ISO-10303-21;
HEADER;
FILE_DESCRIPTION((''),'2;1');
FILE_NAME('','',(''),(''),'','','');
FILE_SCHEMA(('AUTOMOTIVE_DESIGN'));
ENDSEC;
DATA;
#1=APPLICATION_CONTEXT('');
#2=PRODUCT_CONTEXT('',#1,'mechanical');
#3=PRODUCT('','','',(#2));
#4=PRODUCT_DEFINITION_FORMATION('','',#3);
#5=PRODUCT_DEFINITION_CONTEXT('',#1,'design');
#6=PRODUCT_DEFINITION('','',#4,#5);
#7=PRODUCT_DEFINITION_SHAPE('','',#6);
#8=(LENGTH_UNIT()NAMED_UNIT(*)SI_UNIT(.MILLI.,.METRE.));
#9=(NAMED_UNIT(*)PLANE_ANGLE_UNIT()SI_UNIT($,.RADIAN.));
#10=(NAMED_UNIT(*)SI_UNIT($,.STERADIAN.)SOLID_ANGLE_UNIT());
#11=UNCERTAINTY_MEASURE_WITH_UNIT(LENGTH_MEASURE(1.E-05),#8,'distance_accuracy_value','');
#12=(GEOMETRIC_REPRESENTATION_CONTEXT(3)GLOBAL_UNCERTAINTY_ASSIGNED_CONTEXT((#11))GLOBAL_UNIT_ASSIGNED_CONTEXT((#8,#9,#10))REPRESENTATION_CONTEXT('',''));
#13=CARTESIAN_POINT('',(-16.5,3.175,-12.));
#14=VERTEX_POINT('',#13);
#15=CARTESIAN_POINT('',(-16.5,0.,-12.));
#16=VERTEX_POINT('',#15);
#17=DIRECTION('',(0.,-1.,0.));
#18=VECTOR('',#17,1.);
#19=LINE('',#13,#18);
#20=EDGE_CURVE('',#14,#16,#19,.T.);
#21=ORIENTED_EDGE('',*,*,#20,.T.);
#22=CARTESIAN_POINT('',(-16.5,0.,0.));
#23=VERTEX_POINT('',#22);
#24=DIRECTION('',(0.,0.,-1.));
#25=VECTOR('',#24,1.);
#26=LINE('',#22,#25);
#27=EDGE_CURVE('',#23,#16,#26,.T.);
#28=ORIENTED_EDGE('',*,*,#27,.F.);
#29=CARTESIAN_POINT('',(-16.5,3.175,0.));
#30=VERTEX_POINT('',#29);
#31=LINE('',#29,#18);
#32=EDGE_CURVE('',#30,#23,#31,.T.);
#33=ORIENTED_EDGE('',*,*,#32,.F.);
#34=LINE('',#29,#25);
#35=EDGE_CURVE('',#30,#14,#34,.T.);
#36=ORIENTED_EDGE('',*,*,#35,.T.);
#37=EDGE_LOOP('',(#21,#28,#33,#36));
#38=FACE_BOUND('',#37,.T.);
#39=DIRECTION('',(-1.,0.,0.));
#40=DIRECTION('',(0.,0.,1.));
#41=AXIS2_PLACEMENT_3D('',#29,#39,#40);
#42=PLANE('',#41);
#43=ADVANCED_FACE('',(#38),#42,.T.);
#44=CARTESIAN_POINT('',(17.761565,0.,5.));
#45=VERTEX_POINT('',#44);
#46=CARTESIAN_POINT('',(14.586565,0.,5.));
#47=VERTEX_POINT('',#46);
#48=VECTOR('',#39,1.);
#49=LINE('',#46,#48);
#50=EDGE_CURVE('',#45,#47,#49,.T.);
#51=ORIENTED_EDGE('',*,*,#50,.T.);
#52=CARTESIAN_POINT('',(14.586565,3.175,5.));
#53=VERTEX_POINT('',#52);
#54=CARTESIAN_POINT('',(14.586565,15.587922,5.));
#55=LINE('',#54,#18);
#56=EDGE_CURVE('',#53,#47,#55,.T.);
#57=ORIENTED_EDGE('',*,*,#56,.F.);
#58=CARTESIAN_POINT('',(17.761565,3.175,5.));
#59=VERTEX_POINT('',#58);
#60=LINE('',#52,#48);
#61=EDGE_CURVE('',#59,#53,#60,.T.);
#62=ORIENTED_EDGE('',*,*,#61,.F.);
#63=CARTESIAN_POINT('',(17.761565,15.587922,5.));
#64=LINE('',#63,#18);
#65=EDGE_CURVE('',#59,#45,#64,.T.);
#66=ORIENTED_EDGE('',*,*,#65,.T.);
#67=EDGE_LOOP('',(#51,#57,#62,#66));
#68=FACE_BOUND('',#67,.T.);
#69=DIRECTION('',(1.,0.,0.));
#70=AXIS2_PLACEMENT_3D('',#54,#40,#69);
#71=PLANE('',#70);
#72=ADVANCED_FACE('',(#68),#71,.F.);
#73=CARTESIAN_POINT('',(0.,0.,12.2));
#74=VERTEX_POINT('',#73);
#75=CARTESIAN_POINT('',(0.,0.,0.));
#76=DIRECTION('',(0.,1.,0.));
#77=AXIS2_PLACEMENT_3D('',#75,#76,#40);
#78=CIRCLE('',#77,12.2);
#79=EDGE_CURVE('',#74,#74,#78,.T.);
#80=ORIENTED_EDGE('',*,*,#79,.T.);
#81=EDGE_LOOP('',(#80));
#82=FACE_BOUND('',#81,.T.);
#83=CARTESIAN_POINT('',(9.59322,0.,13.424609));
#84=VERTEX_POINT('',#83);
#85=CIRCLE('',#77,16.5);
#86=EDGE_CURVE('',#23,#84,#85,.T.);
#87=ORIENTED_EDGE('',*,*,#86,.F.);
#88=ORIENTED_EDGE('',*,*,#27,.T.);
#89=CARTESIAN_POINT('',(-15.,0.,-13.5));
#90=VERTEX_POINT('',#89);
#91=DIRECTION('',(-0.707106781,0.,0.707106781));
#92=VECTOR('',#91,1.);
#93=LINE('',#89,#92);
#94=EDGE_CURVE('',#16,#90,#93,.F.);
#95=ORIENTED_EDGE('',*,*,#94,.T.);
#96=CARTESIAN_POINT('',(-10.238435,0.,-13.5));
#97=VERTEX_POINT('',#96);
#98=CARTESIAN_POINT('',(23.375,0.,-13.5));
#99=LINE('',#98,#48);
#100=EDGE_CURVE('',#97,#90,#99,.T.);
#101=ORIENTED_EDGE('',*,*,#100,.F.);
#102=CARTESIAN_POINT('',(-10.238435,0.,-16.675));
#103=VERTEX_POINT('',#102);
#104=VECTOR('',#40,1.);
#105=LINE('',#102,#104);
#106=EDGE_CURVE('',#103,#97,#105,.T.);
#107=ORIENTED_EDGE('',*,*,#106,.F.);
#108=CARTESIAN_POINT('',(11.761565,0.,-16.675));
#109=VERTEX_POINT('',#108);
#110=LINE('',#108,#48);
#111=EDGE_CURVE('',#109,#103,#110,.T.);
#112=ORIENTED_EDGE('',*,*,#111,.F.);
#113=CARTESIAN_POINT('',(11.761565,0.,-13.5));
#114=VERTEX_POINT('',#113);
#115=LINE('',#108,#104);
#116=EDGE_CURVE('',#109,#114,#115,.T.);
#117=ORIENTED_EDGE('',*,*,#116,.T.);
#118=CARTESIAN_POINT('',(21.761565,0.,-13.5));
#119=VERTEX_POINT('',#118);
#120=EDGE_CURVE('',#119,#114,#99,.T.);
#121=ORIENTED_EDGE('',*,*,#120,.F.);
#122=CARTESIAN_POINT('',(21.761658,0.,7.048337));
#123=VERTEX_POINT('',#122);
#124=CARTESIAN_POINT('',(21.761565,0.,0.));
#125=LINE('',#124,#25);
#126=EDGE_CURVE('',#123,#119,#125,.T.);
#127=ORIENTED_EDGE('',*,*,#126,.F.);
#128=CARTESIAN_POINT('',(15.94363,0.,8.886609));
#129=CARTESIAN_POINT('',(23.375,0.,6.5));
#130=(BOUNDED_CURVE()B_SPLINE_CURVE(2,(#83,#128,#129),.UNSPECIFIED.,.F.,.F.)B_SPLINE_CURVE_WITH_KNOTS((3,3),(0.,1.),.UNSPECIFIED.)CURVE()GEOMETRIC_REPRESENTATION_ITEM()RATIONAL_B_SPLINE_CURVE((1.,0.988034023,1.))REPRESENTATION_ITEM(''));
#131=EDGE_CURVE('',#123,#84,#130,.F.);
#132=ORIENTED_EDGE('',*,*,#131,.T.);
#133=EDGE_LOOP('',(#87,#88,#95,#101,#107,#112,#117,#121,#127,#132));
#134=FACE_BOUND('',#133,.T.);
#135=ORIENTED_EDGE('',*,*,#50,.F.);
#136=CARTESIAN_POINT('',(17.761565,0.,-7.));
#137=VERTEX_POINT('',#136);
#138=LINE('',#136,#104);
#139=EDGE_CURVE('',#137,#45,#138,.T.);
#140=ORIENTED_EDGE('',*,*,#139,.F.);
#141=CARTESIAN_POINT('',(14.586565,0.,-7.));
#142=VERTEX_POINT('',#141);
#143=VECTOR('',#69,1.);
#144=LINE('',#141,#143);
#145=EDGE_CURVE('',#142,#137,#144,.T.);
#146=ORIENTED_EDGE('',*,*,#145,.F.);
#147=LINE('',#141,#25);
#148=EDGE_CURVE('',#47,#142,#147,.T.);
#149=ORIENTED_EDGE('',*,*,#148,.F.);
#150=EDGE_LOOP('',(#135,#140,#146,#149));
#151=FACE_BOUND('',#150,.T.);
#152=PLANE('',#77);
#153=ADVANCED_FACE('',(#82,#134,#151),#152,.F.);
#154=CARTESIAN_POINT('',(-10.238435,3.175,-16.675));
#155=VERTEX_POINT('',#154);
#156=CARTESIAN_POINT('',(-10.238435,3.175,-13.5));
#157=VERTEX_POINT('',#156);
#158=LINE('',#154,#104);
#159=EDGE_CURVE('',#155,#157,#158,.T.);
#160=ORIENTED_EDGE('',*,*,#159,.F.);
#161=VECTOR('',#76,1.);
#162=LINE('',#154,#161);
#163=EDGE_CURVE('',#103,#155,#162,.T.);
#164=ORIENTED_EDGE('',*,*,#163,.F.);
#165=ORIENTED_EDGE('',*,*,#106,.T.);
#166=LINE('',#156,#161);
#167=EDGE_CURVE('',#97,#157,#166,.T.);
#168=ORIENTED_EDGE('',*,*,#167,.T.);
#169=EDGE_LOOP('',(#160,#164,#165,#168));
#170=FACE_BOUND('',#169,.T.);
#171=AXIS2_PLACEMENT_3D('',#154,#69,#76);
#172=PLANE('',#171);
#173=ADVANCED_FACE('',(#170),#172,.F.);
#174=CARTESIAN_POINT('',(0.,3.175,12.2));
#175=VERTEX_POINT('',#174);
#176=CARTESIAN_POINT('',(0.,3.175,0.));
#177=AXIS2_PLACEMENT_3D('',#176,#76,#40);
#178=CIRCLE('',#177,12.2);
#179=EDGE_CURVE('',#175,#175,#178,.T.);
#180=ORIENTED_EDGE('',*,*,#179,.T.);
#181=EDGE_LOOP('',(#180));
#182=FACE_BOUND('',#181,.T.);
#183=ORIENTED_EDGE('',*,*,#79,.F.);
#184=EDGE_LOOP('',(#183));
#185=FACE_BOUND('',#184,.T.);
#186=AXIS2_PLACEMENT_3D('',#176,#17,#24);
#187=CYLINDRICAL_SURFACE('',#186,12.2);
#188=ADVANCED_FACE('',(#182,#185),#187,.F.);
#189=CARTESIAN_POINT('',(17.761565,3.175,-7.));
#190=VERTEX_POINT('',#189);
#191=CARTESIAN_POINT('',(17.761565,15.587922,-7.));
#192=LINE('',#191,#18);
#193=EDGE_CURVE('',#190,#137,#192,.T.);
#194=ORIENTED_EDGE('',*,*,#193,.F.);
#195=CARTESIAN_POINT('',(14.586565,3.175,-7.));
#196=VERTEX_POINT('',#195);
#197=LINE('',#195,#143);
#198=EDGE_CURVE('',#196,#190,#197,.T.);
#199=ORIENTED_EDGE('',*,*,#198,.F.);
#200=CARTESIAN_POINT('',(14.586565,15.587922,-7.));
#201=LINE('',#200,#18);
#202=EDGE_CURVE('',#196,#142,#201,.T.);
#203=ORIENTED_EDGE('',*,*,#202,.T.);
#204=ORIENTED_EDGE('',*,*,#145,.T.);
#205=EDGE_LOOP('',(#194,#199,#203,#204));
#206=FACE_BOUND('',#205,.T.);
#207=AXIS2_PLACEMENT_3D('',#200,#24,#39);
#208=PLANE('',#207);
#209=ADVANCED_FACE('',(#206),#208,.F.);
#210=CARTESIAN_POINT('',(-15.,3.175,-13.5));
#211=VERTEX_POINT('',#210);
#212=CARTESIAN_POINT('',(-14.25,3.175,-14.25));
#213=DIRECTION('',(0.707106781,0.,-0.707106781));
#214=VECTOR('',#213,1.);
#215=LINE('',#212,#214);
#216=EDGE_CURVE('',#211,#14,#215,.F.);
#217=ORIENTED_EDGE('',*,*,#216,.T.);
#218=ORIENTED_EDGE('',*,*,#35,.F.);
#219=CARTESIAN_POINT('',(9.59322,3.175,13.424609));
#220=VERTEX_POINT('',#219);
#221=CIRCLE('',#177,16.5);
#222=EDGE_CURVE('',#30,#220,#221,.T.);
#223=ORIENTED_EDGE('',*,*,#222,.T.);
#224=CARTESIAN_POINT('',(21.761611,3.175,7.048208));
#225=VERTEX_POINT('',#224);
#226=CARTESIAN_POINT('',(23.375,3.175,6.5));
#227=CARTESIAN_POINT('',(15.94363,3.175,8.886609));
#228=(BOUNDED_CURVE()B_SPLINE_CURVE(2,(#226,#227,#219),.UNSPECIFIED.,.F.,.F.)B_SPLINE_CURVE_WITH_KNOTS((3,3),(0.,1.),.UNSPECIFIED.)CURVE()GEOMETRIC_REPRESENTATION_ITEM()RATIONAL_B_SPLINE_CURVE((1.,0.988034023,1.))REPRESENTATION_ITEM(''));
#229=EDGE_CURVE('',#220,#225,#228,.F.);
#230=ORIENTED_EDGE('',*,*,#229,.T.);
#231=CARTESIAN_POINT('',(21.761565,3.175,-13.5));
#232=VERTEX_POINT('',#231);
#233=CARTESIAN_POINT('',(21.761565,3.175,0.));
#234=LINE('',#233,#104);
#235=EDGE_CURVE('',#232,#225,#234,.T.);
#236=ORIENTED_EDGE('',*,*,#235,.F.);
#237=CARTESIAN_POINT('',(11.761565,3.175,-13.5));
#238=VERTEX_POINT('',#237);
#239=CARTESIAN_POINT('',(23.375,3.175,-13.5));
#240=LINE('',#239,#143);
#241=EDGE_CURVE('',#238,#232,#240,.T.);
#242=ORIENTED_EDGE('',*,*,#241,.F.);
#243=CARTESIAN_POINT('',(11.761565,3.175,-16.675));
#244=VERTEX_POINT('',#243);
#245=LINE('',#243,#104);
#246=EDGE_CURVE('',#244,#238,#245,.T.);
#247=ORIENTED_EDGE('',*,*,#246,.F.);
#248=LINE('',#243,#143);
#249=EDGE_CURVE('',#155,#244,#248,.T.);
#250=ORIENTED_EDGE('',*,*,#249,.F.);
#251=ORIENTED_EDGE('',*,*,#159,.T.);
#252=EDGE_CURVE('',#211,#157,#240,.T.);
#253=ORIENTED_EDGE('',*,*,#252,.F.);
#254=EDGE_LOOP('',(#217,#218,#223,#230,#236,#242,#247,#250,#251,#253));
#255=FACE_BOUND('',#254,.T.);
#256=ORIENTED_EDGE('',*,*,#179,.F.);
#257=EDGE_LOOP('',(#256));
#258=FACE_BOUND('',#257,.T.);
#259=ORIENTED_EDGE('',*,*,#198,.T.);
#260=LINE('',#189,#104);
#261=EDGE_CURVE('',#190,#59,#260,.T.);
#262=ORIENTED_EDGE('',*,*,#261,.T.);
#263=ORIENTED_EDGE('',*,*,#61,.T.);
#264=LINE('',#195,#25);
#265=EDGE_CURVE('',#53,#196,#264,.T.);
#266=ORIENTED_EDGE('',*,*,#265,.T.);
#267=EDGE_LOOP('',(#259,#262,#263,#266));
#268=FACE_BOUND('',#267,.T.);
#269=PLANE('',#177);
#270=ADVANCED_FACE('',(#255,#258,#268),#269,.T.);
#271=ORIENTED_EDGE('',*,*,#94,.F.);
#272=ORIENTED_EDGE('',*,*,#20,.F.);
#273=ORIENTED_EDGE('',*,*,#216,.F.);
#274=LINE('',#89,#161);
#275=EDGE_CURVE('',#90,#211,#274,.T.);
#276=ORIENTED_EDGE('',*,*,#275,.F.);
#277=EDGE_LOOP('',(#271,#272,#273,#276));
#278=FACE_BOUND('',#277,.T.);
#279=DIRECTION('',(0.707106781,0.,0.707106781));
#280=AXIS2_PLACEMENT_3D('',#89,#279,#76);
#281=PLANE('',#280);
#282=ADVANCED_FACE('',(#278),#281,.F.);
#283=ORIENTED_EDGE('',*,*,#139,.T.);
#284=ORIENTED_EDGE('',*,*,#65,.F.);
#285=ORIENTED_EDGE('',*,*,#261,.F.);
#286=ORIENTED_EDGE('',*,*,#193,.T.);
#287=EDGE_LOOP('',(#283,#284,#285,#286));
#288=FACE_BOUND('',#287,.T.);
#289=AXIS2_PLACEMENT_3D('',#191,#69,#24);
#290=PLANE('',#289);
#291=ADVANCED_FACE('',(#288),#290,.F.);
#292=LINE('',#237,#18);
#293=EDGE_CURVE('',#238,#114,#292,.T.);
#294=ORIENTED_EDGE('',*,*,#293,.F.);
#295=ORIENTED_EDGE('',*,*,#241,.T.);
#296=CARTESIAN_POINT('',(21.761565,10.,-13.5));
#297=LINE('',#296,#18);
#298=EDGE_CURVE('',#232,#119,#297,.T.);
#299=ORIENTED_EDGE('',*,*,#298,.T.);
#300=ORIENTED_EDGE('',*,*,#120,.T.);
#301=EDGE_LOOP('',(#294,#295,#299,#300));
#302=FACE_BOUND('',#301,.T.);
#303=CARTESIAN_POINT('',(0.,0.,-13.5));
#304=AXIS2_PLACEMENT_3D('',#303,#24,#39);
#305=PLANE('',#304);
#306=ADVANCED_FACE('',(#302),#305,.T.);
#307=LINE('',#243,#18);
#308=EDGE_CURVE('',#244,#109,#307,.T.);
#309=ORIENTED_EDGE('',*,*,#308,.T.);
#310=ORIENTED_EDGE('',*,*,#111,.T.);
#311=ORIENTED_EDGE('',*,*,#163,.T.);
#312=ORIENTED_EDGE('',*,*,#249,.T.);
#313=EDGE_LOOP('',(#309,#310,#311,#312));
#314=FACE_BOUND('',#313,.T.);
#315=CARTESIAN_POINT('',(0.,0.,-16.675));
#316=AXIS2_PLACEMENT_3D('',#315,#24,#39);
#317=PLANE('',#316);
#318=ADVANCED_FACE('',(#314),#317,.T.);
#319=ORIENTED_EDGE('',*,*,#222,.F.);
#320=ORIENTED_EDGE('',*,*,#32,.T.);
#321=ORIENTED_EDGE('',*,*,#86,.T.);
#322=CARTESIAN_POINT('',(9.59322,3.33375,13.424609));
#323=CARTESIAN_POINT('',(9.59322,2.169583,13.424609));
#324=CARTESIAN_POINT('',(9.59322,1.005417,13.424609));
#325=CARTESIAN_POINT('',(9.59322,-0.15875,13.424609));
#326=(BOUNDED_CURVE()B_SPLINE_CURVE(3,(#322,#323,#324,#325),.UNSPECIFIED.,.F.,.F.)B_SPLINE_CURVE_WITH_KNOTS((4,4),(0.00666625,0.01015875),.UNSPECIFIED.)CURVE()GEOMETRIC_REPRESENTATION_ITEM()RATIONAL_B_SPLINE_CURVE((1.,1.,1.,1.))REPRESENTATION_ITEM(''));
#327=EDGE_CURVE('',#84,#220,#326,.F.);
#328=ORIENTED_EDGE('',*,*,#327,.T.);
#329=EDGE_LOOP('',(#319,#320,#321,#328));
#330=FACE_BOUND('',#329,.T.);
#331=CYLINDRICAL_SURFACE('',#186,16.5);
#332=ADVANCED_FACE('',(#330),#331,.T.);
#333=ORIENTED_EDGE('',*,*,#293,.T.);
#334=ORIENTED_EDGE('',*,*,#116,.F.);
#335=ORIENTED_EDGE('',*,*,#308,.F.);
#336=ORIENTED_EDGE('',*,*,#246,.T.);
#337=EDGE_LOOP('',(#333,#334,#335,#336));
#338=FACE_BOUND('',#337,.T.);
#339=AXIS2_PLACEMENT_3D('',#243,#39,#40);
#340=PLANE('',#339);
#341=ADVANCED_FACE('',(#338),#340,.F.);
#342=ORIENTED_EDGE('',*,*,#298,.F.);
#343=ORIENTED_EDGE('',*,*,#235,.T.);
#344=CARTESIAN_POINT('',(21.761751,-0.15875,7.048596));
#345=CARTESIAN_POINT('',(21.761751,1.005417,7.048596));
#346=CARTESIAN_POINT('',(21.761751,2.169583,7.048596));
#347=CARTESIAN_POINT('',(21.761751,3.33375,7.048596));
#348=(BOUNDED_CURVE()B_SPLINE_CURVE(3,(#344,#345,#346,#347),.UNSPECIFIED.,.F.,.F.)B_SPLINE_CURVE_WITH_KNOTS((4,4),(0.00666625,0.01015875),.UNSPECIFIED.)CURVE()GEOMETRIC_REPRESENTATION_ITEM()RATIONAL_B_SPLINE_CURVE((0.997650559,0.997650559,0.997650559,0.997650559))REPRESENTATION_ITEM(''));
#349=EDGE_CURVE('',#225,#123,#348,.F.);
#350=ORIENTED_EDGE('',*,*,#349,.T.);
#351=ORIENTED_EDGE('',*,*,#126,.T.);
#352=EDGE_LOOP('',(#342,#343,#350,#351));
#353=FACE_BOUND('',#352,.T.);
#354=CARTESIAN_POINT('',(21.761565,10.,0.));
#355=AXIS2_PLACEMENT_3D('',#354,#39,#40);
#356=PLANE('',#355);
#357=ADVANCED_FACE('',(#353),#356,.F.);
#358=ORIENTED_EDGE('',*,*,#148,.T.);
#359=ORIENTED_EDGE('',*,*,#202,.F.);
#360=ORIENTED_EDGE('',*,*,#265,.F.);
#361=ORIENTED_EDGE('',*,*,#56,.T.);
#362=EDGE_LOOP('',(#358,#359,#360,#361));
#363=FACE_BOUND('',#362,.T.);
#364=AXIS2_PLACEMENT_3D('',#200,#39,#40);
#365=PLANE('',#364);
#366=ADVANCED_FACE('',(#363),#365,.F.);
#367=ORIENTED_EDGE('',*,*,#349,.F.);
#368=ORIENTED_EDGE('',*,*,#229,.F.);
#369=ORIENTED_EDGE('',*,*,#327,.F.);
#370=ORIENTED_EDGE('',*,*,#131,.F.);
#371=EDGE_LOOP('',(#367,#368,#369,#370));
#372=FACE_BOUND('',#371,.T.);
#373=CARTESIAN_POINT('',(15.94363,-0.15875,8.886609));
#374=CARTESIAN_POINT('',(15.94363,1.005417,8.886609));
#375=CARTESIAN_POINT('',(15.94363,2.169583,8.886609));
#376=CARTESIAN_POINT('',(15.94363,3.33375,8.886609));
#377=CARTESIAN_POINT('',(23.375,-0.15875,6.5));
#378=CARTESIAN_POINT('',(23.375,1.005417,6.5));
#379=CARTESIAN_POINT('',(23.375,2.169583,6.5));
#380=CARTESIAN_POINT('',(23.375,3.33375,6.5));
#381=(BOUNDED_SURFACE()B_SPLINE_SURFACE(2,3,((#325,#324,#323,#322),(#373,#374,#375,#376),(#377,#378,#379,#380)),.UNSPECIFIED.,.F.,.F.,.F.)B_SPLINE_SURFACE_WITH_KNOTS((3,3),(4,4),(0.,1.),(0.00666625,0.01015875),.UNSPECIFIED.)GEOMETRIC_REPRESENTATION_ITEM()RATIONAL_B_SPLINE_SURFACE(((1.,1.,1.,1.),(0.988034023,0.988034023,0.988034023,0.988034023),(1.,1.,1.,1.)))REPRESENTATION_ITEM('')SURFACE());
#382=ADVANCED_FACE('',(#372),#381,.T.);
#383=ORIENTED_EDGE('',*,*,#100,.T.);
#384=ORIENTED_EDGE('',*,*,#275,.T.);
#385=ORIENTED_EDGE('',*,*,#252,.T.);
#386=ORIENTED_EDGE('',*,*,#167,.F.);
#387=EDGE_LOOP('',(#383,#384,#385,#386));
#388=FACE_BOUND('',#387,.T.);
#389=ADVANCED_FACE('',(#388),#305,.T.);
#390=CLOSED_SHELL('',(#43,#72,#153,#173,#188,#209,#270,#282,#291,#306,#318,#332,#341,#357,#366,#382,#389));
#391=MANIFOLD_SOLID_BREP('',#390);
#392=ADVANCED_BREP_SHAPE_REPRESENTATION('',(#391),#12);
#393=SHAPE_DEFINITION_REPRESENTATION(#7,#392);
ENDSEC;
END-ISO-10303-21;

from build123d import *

# Parameters (mm, degrees)
BOSS_EXTRUDE1_DEPTH = 3.175
SKETCH2_W           = 3.175
SKETCH2_H           = 14
BOSS_EXTRUDE2_DEPTH = 3.175
BOSS_EXTRUDE3_DEPTH = 3.175
CUT_EXTRUDE2_START  = -10
CUT_EXTRUDE2_DEPTH  = 10
FILLET1_R           = 50
SKETCH6_W           = 6.875
SKETCH6_H           = 3.175
BOSS_EXTRUDE5_DEPTH = 3.11351312
SKETCH7_W           = 11.175
SKETCH7_H           = 3.175
SKETCH7_W_2         = 4.3
CUT_EXTRUDE3_DEPTH  = 5.11351312
BOSS_EXTRUDE6_START = -3.175
BOSS_EXTRUDE6_DEPTH = 3.175
SKETCH9_W           = 3.175
SKETCH9_H           = 14
BOSS_EXTRUDE7_DEPTH = 3.175
SKETCH10_W          = 3.175
SKETCH10_H          = 12
CUT_EXTRUDE4_DEPTH  = 3.175
CUT_EXTRUDE5_DEPTH  = 10
SKETCH14_W          = 22
SKETCH14_H          = 3.175
BOSS_EXTRUDE8_DEPTH = 3.175
CHAMFER1_SIZE       = 1.5


with BuildPart() as part:
    # Sketch1 → Boss-Extrude1 (new body)
    with BuildSketch(Plane(origin=(0, 0, 0), x_dir=(1, 0, 0), z_dir=(0, 1, 0))):
        with BuildLine():
            ThreePointArc((-16.5, 0), (0, -16.5), (16.5, 0))
            Line((16.5, 0), (16.5, 18.61351312))
            Line((16.5, 18.61351312), (12.2, 18.61351312))
            Line((12.2, 18.61351312), (12.2, 0))
            ThreePointArc((12.2, 0), (0, -12.2), (-12.2, 0))
            Line((-12.2, 0), (-12.2, 18))
            Line((-12.2, 18), (-16.5, 18))
            Line((-16.5, 18), (-16.5, 0))
        make_face()
    extrude(amount=BOSS_EXTRUDE1_DEPTH)

    # Sketch2 → Boss-Extrude2 (add)
    with BuildSketch(Plane(origin=(0, 3.175, 0), x_dir=(1, 0, 0), z_dir=(0, 1, 0))):
        with BuildLine():
            Line((15.2, -3.034798181), (15.2, -4.5))
            Line((15.2, -4.5), (15.874507866, -4.5))
            Line((15.874507866, -4.5), (23.375, -4.5))
            Line((23.375, -4.5), (23.375, 15.5))
            Line((23.375, 15.5), (15.2, 15.5))
            Line((15.2, 15.5), (15.2, 3.034798181))
            ThreePointArc((15.2, 3.034798181), (15.424817665, 1.524795068), (15.5, 0))
            ThreePointArc((15.5, 0), (15.424817665, -1.524795068), (15.2, -3.034798181))
        make_face()
        with Locations((18.0875, 4.5)):
            Rectangle(SKETCH2_W, SKETCH2_H, mode=Mode.SUBTRACT)
    extrude(amount=-BOSS_EXTRUDE2_DEPTH)

    # Sketch3 → Boss-Extrude3 (add)
    with BuildSketch(Plane(origin=(0, 0, 0), x_dir=(-1, 0, 0), z_dir=(0, -1, 0))):
        with BuildLine():
            Line((-23.375, -16.5), (0, -16.5))
            ThreePointArc((0, -16.5), (-9.949874371, -13.162446581), (-15.874507866, -4.5))
            Line((-15.874507866, -4.5), (-23.375, -4.5))
            Line((-23.375, -4.5), (-23.375, -16.5))
        make_face()
    extrude(amount=-BOSS_EXTRUDE3_DEPTH)

    # Sketch5 → Cut-Extrude2 (cut)
    with BuildSketch(Plane(origin=(0, 3.175, 0), x_dir=(1, 0, 0), z_dir=(0, 1, 0)).offset(CUT_EXTRUDE2_START)):
        with BuildLine():
            Line((23.375, -6.5), (19.675, -6.5))
            Line((19.675, -6.5), (17.491400843, -6.5))
            Line((17.491400843, -6.5), (15.165750888, -6.5))
            ThreePointArc((15.165750888, -6.5), (9.082951062, -13.774977314), (0, -16.5))
            Line((0, -16.5), (12.165525061, -16.5))
            Line((12.165525061, -16.5), (23.375, -16.5))
            Line((23.375, -16.5), (23.375, -6.5))
        make_face()
    extrude(amount=CUT_EXTRUDE2_DEPTH, mode=Mode.SUBTRACT)

    # Fillet1
    # the kernel refuses this fillet: 50 mm, written as the material it adds along each edge
    with BuildSketch(Plane(origin=(15.165750888, 0, 6.5), x_dir=(-0.6269455789999085, 0, 0.7790630532713443), z_dir=(0, 1, 0))) as fillet1_piece_1:
        with BuildLine():
            CenterArc((22.355625569, 48.152189259), FILLET1_R, 236.629724146, 17.744988352)
            Line((-5.146752438, 6.395522678), (-5.696799998, 5.560389347))
            ThreePointArc((-5.696799998, 5.560389347), (-3.352439272, 2.57081576), (-0.779063053, -0.626945579))
            Line((-0.779063053, -0.626945579), (0.269344886, -0.963043785))
            ThreePointArc((0.269344886, -0.963043785), (4.444190625, -0.390222456), (8.619036364, -0.963043785))
            Line((8.619036364, -0.963043785), (8.88838125, 0))
        make_face()
    extrude(amount=3.175)

    # Sketch6 → Boss-Extrude5 (add)
    with BuildSketch(Plane(origin=(0, 0, -15.5), x_dir=(-1, 0, 0), z_dir=(0, 0, -1))):
        with Locations((-19.9375, 1.5875)):
            Rectangle(SKETCH6_W, SKETCH6_H)
    extrude(amount=BOSS_EXTRUDE5_DEPTH)

    # Sketch7 → Cut-Extrude3 (cut)
    with BuildSketch(Plane(origin=(0, 0, -18.61351312), x_dir=(-1, 0, 0), z_dir=(0, 0, -1))):
        with Locations((-17.7875, 1.5875)):
            Rectangle(SKETCH7_W, SKETCH7_H)
        with Locations((14.35, 1.5875)):
            Rectangle(SKETCH7_W_2, SKETCH7_H)
    extrude(amount=-CUT_EXTRUDE3_DEPTH, mode=Mode.SUBTRACT)

    # Sketch8 → Boss-Extrude6 (add)
    with BuildSketch(Plane(origin=(0, 3.175, 0), x_dir=(1, 0, 0), z_dir=(0, 1, 0)).offset(BOSS_EXTRUDE6_START)):
        with BuildLine():
            Line((-12.2, 13.5), (-12.2, 0))
            ThreePointArc((-12.2, 0), (0, 12.2), (12.2, 0))
            Line((12.2, 0), (12.2, 13.5))
            Line((12.2, 13.5), (-12.2, 13.5))
        make_face()
    extrude(amount=BOSS_EXTRUDE6_DEPTH)

    # Sketch9 → Boss-Extrude7 (add)
    with BuildSketch(Plane(origin=(0, 0, 0), x_dir=(-1, 0, 0), z_dir=(0, -1, 0))):
        with Locations((-18.0875, 4.5)):
            Rectangle(SKETCH9_W, SKETCH9_H)
    extrude(amount=-BOSS_EXTRUDE7_DEPTH)

    # Sketch10 → Cut-Extrude4 (cut)
    with BuildSketch(Plane(origin=(0, 0, 0), x_dir=(-1, 0, 0), z_dir=(0, -1, 0))):
        with Locations((-16.17406463, 1)):
            Rectangle(SKETCH10_W, SKETCH10_H)
    extrude(amount=-CUT_EXTRUDE4_DEPTH, mode=Mode.SUBTRACT)

    # Sketch12 → Cut-Extrude5 (cut)
    with BuildSketch(Plane(origin=(0, 0, 0), x_dir=(-1, 0, 0), z_dir=(0, -1, 0))):
        with BuildLine():
            Line((-21.76156463, -7.048663108), (-21.76156463, 13.5))
            Line((-21.76156463, 13.5), (-23.375, 13.5))
            Line((-23.375, 13.5), (-23.375, -6.5))
            ThreePointArc((-23.375, -6.5), (-22.565944603, -6.767457123), (-21.76156463, -7.048663108))
        make_face()
    extrude(amount=-CUT_EXTRUDE5_DEPTH, mode=Mode.SUBTRACT)

    # Sketch14 → Boss-Extrude8 (add)
    with BuildSketch(Plane(origin=(0, 0, -13.5), x_dir=(-1, 0, 0), z_dir=(0, 0, -1))):
        with Locations((-0.76156463, 1.5875)):
            Rectangle(SKETCH14_W, SKETCH14_H)
    extrude(amount=BOSS_EXTRUDE8_DEPTH)

    # Chamfer1
    chamfer1_edges = [part.edges().sort_by_distance(p)[0] for p in [
        (-16.5, 1.5875, -13.5),
    ]]
    chamfer(chamfer1_edges, length=CHAMFER1_SIZE)


solid = part.part
